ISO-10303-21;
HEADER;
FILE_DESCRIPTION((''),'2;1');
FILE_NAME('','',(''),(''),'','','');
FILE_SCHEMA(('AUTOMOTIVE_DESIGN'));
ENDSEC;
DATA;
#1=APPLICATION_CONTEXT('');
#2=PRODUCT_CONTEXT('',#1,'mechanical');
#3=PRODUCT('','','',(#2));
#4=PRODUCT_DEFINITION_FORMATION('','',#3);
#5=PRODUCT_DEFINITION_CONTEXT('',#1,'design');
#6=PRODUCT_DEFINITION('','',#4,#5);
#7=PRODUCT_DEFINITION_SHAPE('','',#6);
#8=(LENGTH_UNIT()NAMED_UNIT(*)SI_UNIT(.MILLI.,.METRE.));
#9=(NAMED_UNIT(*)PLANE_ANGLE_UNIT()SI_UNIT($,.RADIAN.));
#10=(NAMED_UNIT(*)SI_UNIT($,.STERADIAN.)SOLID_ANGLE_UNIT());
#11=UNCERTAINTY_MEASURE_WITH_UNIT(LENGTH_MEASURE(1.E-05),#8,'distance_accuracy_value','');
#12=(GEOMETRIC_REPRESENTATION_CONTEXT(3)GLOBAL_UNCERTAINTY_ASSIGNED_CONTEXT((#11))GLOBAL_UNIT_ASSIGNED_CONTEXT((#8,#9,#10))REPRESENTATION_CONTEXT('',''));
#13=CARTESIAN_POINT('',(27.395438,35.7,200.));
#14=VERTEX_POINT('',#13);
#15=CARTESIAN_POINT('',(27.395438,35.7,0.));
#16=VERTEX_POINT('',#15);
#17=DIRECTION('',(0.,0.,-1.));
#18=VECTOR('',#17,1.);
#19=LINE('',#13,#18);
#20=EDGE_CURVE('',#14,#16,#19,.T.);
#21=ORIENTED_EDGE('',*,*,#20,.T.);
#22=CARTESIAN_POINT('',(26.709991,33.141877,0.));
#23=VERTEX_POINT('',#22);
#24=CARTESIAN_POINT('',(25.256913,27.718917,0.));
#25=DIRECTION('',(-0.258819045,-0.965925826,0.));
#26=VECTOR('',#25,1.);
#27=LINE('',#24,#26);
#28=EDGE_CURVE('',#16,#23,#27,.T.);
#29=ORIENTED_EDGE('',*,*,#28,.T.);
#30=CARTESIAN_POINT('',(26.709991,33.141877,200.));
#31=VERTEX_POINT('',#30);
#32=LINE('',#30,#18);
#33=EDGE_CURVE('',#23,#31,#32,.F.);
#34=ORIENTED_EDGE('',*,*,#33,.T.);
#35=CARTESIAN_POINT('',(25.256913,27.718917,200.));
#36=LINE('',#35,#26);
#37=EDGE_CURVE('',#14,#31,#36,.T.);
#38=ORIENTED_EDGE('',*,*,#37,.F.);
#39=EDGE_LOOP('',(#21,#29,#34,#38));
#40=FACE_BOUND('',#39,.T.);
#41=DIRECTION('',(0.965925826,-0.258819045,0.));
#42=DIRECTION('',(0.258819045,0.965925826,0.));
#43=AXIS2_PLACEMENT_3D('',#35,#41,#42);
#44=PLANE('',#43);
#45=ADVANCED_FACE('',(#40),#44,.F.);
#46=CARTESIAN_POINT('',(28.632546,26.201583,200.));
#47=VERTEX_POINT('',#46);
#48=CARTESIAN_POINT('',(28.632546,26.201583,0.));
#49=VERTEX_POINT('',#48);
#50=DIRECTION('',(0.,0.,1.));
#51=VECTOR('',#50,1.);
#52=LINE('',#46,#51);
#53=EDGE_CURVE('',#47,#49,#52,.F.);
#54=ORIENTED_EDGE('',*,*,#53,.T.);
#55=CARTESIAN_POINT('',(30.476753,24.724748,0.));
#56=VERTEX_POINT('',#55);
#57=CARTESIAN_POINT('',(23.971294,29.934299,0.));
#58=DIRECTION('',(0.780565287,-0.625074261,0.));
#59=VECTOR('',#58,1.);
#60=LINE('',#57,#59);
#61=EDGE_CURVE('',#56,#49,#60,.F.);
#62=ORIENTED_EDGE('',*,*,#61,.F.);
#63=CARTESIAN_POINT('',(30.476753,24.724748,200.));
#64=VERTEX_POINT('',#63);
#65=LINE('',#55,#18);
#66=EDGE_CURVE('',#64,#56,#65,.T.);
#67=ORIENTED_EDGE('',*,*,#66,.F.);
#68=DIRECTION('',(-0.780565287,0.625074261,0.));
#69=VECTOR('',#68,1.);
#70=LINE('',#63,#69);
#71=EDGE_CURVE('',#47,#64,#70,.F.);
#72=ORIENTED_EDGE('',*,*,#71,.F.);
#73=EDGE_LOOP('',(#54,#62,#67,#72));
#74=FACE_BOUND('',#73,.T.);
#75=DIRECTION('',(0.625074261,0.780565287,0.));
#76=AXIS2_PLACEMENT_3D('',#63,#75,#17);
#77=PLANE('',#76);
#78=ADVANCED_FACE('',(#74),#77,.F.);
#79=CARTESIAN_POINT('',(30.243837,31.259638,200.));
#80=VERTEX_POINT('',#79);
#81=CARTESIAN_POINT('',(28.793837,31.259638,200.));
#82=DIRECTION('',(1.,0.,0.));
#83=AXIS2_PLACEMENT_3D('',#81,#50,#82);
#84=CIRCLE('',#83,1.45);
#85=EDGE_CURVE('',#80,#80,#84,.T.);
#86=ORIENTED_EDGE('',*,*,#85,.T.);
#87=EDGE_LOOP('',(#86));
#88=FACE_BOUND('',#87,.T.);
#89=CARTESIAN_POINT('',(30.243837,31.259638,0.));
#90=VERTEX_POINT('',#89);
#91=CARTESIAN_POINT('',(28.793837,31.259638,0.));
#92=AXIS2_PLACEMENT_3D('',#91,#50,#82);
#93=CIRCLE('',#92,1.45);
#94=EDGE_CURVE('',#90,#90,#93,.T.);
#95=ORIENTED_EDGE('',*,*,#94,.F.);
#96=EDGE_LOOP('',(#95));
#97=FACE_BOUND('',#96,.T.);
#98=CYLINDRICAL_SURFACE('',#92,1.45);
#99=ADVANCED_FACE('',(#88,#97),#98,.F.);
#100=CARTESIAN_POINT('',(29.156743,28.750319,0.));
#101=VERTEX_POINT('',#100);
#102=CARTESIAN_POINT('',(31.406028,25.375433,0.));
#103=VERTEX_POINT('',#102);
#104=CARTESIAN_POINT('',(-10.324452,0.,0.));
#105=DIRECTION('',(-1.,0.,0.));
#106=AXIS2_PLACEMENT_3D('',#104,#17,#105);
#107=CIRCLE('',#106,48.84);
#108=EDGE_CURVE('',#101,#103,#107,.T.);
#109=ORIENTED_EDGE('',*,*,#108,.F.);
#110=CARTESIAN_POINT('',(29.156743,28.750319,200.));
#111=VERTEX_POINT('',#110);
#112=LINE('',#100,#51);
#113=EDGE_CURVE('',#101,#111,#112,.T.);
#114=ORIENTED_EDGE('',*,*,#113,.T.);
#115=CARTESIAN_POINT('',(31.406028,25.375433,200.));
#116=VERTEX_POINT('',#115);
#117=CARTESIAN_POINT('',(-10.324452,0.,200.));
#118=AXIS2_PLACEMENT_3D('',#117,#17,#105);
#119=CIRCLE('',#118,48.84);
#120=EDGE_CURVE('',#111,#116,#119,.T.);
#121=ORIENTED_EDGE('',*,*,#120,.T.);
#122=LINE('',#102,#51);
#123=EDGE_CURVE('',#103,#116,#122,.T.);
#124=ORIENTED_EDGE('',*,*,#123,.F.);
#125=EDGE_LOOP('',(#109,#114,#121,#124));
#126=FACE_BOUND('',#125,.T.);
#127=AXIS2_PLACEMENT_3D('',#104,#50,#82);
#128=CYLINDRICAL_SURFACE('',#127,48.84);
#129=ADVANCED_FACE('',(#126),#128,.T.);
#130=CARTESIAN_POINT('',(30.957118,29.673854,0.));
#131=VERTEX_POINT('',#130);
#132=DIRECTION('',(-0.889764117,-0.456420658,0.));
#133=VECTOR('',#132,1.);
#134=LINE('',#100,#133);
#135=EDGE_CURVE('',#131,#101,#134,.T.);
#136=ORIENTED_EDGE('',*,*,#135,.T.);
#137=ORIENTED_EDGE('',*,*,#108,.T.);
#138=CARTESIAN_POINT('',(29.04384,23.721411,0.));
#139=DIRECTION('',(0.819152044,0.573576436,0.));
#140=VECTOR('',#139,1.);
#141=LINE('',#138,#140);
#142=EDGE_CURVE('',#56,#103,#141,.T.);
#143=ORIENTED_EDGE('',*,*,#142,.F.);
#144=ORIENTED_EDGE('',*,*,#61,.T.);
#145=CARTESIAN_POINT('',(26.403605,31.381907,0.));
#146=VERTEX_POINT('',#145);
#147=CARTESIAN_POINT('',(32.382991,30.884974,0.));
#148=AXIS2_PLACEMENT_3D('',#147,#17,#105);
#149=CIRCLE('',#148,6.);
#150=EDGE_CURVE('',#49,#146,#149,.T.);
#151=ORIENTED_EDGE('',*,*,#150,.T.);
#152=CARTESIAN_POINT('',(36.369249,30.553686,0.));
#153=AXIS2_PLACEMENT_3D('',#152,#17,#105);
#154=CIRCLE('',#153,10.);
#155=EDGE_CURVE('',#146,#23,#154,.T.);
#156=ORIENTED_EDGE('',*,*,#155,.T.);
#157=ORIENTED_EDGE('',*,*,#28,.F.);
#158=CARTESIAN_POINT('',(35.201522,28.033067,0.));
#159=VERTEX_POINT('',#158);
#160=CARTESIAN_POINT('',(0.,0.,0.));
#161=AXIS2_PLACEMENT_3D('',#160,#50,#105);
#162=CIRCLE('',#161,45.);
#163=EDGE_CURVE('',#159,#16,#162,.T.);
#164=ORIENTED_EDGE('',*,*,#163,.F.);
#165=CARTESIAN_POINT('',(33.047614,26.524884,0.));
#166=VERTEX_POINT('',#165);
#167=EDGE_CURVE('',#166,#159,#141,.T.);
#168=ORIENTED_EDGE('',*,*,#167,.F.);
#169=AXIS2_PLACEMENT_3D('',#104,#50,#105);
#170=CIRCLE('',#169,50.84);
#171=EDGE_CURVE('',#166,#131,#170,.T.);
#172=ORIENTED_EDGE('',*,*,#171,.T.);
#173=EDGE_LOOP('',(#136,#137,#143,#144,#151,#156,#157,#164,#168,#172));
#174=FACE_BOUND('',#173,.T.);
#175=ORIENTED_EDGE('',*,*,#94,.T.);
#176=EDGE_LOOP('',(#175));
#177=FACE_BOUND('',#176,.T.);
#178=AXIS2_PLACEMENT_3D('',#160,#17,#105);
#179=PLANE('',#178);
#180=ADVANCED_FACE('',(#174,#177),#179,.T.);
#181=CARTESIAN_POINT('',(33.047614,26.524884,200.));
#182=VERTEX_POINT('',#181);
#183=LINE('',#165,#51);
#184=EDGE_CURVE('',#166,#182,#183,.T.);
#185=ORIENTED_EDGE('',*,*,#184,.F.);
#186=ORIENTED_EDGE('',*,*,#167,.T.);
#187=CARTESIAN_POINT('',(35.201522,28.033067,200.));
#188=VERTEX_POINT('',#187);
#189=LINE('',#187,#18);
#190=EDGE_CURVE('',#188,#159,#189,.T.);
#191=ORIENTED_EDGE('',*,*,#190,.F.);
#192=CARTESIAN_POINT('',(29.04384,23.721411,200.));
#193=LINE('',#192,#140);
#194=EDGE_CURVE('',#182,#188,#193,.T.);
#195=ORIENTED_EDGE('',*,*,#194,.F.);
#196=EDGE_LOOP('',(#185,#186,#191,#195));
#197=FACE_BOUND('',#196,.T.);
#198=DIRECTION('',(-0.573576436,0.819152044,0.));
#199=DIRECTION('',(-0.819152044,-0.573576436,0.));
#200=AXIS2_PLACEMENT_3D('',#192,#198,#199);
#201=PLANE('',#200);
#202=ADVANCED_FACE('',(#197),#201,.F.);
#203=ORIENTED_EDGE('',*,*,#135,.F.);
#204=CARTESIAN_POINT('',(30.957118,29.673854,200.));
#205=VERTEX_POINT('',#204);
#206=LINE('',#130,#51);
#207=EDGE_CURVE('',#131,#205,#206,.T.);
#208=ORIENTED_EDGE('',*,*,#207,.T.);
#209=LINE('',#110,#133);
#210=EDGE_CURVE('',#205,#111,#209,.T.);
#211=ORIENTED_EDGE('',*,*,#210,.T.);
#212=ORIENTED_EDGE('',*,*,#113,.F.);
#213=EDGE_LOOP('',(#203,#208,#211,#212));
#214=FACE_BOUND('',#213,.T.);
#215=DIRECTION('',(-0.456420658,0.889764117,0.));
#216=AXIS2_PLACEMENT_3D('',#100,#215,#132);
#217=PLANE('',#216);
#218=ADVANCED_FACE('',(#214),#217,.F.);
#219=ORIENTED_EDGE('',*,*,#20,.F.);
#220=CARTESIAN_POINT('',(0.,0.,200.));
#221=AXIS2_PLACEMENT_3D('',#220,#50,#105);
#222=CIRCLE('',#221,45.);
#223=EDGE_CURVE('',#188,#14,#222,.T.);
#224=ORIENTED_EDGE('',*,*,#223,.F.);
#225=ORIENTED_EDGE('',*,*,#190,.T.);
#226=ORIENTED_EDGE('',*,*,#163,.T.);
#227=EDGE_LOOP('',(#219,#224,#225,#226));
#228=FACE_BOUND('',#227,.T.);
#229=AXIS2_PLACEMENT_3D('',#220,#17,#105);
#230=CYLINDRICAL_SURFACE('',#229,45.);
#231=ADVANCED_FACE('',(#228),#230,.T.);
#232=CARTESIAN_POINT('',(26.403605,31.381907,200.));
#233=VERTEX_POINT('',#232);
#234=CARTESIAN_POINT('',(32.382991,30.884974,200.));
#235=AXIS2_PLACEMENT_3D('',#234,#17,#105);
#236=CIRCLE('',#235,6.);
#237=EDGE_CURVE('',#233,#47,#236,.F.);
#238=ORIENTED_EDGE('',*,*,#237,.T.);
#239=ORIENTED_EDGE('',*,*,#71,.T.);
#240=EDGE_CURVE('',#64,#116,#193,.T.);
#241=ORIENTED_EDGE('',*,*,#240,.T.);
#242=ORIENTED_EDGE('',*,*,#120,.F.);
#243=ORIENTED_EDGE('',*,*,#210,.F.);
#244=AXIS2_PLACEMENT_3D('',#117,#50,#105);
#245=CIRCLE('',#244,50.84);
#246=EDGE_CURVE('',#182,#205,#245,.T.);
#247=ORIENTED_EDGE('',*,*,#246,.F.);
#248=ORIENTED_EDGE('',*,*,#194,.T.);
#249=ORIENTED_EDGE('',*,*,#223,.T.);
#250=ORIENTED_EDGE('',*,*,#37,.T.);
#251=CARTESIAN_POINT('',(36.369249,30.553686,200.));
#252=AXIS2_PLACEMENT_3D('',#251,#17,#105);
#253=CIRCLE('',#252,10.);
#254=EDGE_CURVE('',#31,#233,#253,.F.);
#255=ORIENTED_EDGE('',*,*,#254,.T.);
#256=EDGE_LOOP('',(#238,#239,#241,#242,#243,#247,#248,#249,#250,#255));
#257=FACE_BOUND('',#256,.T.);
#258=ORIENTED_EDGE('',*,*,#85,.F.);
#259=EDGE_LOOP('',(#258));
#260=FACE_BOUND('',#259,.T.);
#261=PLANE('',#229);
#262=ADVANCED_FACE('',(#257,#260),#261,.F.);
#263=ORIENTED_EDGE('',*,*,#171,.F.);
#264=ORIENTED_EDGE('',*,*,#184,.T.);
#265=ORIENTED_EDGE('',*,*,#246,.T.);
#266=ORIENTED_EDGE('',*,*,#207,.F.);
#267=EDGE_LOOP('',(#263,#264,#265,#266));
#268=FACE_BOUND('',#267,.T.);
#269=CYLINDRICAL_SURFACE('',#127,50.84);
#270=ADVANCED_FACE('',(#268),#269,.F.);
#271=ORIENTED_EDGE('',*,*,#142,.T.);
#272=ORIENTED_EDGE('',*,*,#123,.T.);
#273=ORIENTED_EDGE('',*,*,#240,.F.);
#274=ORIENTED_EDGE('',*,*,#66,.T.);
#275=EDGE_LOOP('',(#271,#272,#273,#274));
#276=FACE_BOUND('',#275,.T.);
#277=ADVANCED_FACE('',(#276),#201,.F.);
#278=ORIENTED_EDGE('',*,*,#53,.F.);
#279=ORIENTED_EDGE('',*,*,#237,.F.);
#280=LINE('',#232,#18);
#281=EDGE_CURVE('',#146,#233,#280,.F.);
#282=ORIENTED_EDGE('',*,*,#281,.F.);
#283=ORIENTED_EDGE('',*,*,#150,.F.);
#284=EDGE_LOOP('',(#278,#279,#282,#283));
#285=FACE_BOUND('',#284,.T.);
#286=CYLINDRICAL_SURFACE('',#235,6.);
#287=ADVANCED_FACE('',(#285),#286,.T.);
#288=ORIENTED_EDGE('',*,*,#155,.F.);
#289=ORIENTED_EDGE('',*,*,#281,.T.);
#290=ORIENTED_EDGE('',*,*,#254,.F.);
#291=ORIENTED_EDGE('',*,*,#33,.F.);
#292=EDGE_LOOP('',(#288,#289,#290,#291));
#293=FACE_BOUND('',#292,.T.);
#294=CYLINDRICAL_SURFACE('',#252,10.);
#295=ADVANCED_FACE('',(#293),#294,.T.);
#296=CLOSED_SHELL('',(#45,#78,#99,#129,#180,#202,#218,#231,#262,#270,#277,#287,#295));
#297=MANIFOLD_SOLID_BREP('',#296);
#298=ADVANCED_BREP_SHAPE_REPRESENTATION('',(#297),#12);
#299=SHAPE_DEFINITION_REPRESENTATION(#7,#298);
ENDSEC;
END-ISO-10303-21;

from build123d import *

# Parameters (mm, degrees)
EXTRUDE_1_DEPTH     = 200
SKETCH_2_R          = 1.45
CUT_EXTRUDE_1_DEPTH = 207.188353614
CUT_EXTRUDE_2_DEPTH = 207.188353614
FILLET_1_R          = 10
CHAMFER_START       = 36
CHAMFER_1_OUTLINE_W = 8
CHAMFER_1_OUTLINE_H = 200
CHAMFER_1_DEPTH     = 2.349513284
FILLET_2_R          = 6


with BuildPart() as part:
    # Эскиз1 → Бобышка-Вытянуть1 (new body)
    with BuildSketch(Plane.XY):
        with BuildLine():
            Line((25.256912811, 27.718916921), (27.395437576, 35.7))
            ThreePointArc((27.395437576, 35.7), (31.532369241, 32.10466773), (35.201522214, 28.033066792))
            Line((35.201522214, 28.033066792), (29.04384005, 23.721411323))
            ThreePointArc((29.04384005, 23.721411323), (27.223848976, 25.789766322), (25.256912811, 27.718916921))
        make_face()
    extrude(amount=EXTRUDE_1_DEPTH)

    # Эскиз2 → Вырез-Вытянуть1 (cut, through all)
    with BuildSketch(Plane.XY.offset(200)):
        with Locations((28.793836633, 31.259638065)):
            Circle(SKETCH_2_R)
    extrude(amount=-CUT_EXTRUDE_1_DEPTH, mode=Mode.SUBTRACT)

    # Эскиз4 → Вырез-Вытянуть2 (cut, through all)
    with BuildSketch(Plane.XY.offset(200)):
        with BuildLine():
            Line((29.156742817, 28.750319078), (30.957117515, 29.673853967))
            ThreePointArc((30.957117515, 29.673853967), (32.031639738, 28.118803021), (33.047614071, 26.524884074))
            Line((33.047614071, 26.524884074), (31.406028194, 25.375433268))
            ThreePointArc((31.406028194, 25.375433268), (30.316432625, 27.086234289), (29.156742817, 28.750319078))
        make_face()
    extrude(amount=-CUT_EXTRUDE_2_DEPTH, mode=Mode.SUBTRACT)

    # Скругление1
    fillet_1_edges = [part.edges().sort_by_distance(p)[0] for p in [
        (25.256912811, 27.718916921, 100),
    ]]
    fillet(fillet_1_edges, radius=FILLET_1_R)

    # Фаска1: read off the stored shape, not the designer's step
    # Фаска1 outline → Фаска1 (cut)
    with BuildSketch(Plane(origin=(0, 0, 0), x_dir=(0.7805652874719331, -0.6250742611833081, 0), z_dir=(0.6250742611833081, 0.7805652874719331, 0)).offset(CHAMFER_START)):
        with Locations((6, -100)):
            Rectangle(CHAMFER_1_OUTLINE_W, CHAMFER_1_OUTLINE_H)
    extrude(amount=CHAMFER_1_DEPTH, mode=Mode.SUBTRACT)

    # Скругление2
    fillet_2_edges = [part.edges().sort_by_distance(p)[0] for p in [
        (26.792531546, 27.67506033, 100),
    ]]
    fillet(fillet_2_edges, radius=FILLET_2_R)


solid = part.part
